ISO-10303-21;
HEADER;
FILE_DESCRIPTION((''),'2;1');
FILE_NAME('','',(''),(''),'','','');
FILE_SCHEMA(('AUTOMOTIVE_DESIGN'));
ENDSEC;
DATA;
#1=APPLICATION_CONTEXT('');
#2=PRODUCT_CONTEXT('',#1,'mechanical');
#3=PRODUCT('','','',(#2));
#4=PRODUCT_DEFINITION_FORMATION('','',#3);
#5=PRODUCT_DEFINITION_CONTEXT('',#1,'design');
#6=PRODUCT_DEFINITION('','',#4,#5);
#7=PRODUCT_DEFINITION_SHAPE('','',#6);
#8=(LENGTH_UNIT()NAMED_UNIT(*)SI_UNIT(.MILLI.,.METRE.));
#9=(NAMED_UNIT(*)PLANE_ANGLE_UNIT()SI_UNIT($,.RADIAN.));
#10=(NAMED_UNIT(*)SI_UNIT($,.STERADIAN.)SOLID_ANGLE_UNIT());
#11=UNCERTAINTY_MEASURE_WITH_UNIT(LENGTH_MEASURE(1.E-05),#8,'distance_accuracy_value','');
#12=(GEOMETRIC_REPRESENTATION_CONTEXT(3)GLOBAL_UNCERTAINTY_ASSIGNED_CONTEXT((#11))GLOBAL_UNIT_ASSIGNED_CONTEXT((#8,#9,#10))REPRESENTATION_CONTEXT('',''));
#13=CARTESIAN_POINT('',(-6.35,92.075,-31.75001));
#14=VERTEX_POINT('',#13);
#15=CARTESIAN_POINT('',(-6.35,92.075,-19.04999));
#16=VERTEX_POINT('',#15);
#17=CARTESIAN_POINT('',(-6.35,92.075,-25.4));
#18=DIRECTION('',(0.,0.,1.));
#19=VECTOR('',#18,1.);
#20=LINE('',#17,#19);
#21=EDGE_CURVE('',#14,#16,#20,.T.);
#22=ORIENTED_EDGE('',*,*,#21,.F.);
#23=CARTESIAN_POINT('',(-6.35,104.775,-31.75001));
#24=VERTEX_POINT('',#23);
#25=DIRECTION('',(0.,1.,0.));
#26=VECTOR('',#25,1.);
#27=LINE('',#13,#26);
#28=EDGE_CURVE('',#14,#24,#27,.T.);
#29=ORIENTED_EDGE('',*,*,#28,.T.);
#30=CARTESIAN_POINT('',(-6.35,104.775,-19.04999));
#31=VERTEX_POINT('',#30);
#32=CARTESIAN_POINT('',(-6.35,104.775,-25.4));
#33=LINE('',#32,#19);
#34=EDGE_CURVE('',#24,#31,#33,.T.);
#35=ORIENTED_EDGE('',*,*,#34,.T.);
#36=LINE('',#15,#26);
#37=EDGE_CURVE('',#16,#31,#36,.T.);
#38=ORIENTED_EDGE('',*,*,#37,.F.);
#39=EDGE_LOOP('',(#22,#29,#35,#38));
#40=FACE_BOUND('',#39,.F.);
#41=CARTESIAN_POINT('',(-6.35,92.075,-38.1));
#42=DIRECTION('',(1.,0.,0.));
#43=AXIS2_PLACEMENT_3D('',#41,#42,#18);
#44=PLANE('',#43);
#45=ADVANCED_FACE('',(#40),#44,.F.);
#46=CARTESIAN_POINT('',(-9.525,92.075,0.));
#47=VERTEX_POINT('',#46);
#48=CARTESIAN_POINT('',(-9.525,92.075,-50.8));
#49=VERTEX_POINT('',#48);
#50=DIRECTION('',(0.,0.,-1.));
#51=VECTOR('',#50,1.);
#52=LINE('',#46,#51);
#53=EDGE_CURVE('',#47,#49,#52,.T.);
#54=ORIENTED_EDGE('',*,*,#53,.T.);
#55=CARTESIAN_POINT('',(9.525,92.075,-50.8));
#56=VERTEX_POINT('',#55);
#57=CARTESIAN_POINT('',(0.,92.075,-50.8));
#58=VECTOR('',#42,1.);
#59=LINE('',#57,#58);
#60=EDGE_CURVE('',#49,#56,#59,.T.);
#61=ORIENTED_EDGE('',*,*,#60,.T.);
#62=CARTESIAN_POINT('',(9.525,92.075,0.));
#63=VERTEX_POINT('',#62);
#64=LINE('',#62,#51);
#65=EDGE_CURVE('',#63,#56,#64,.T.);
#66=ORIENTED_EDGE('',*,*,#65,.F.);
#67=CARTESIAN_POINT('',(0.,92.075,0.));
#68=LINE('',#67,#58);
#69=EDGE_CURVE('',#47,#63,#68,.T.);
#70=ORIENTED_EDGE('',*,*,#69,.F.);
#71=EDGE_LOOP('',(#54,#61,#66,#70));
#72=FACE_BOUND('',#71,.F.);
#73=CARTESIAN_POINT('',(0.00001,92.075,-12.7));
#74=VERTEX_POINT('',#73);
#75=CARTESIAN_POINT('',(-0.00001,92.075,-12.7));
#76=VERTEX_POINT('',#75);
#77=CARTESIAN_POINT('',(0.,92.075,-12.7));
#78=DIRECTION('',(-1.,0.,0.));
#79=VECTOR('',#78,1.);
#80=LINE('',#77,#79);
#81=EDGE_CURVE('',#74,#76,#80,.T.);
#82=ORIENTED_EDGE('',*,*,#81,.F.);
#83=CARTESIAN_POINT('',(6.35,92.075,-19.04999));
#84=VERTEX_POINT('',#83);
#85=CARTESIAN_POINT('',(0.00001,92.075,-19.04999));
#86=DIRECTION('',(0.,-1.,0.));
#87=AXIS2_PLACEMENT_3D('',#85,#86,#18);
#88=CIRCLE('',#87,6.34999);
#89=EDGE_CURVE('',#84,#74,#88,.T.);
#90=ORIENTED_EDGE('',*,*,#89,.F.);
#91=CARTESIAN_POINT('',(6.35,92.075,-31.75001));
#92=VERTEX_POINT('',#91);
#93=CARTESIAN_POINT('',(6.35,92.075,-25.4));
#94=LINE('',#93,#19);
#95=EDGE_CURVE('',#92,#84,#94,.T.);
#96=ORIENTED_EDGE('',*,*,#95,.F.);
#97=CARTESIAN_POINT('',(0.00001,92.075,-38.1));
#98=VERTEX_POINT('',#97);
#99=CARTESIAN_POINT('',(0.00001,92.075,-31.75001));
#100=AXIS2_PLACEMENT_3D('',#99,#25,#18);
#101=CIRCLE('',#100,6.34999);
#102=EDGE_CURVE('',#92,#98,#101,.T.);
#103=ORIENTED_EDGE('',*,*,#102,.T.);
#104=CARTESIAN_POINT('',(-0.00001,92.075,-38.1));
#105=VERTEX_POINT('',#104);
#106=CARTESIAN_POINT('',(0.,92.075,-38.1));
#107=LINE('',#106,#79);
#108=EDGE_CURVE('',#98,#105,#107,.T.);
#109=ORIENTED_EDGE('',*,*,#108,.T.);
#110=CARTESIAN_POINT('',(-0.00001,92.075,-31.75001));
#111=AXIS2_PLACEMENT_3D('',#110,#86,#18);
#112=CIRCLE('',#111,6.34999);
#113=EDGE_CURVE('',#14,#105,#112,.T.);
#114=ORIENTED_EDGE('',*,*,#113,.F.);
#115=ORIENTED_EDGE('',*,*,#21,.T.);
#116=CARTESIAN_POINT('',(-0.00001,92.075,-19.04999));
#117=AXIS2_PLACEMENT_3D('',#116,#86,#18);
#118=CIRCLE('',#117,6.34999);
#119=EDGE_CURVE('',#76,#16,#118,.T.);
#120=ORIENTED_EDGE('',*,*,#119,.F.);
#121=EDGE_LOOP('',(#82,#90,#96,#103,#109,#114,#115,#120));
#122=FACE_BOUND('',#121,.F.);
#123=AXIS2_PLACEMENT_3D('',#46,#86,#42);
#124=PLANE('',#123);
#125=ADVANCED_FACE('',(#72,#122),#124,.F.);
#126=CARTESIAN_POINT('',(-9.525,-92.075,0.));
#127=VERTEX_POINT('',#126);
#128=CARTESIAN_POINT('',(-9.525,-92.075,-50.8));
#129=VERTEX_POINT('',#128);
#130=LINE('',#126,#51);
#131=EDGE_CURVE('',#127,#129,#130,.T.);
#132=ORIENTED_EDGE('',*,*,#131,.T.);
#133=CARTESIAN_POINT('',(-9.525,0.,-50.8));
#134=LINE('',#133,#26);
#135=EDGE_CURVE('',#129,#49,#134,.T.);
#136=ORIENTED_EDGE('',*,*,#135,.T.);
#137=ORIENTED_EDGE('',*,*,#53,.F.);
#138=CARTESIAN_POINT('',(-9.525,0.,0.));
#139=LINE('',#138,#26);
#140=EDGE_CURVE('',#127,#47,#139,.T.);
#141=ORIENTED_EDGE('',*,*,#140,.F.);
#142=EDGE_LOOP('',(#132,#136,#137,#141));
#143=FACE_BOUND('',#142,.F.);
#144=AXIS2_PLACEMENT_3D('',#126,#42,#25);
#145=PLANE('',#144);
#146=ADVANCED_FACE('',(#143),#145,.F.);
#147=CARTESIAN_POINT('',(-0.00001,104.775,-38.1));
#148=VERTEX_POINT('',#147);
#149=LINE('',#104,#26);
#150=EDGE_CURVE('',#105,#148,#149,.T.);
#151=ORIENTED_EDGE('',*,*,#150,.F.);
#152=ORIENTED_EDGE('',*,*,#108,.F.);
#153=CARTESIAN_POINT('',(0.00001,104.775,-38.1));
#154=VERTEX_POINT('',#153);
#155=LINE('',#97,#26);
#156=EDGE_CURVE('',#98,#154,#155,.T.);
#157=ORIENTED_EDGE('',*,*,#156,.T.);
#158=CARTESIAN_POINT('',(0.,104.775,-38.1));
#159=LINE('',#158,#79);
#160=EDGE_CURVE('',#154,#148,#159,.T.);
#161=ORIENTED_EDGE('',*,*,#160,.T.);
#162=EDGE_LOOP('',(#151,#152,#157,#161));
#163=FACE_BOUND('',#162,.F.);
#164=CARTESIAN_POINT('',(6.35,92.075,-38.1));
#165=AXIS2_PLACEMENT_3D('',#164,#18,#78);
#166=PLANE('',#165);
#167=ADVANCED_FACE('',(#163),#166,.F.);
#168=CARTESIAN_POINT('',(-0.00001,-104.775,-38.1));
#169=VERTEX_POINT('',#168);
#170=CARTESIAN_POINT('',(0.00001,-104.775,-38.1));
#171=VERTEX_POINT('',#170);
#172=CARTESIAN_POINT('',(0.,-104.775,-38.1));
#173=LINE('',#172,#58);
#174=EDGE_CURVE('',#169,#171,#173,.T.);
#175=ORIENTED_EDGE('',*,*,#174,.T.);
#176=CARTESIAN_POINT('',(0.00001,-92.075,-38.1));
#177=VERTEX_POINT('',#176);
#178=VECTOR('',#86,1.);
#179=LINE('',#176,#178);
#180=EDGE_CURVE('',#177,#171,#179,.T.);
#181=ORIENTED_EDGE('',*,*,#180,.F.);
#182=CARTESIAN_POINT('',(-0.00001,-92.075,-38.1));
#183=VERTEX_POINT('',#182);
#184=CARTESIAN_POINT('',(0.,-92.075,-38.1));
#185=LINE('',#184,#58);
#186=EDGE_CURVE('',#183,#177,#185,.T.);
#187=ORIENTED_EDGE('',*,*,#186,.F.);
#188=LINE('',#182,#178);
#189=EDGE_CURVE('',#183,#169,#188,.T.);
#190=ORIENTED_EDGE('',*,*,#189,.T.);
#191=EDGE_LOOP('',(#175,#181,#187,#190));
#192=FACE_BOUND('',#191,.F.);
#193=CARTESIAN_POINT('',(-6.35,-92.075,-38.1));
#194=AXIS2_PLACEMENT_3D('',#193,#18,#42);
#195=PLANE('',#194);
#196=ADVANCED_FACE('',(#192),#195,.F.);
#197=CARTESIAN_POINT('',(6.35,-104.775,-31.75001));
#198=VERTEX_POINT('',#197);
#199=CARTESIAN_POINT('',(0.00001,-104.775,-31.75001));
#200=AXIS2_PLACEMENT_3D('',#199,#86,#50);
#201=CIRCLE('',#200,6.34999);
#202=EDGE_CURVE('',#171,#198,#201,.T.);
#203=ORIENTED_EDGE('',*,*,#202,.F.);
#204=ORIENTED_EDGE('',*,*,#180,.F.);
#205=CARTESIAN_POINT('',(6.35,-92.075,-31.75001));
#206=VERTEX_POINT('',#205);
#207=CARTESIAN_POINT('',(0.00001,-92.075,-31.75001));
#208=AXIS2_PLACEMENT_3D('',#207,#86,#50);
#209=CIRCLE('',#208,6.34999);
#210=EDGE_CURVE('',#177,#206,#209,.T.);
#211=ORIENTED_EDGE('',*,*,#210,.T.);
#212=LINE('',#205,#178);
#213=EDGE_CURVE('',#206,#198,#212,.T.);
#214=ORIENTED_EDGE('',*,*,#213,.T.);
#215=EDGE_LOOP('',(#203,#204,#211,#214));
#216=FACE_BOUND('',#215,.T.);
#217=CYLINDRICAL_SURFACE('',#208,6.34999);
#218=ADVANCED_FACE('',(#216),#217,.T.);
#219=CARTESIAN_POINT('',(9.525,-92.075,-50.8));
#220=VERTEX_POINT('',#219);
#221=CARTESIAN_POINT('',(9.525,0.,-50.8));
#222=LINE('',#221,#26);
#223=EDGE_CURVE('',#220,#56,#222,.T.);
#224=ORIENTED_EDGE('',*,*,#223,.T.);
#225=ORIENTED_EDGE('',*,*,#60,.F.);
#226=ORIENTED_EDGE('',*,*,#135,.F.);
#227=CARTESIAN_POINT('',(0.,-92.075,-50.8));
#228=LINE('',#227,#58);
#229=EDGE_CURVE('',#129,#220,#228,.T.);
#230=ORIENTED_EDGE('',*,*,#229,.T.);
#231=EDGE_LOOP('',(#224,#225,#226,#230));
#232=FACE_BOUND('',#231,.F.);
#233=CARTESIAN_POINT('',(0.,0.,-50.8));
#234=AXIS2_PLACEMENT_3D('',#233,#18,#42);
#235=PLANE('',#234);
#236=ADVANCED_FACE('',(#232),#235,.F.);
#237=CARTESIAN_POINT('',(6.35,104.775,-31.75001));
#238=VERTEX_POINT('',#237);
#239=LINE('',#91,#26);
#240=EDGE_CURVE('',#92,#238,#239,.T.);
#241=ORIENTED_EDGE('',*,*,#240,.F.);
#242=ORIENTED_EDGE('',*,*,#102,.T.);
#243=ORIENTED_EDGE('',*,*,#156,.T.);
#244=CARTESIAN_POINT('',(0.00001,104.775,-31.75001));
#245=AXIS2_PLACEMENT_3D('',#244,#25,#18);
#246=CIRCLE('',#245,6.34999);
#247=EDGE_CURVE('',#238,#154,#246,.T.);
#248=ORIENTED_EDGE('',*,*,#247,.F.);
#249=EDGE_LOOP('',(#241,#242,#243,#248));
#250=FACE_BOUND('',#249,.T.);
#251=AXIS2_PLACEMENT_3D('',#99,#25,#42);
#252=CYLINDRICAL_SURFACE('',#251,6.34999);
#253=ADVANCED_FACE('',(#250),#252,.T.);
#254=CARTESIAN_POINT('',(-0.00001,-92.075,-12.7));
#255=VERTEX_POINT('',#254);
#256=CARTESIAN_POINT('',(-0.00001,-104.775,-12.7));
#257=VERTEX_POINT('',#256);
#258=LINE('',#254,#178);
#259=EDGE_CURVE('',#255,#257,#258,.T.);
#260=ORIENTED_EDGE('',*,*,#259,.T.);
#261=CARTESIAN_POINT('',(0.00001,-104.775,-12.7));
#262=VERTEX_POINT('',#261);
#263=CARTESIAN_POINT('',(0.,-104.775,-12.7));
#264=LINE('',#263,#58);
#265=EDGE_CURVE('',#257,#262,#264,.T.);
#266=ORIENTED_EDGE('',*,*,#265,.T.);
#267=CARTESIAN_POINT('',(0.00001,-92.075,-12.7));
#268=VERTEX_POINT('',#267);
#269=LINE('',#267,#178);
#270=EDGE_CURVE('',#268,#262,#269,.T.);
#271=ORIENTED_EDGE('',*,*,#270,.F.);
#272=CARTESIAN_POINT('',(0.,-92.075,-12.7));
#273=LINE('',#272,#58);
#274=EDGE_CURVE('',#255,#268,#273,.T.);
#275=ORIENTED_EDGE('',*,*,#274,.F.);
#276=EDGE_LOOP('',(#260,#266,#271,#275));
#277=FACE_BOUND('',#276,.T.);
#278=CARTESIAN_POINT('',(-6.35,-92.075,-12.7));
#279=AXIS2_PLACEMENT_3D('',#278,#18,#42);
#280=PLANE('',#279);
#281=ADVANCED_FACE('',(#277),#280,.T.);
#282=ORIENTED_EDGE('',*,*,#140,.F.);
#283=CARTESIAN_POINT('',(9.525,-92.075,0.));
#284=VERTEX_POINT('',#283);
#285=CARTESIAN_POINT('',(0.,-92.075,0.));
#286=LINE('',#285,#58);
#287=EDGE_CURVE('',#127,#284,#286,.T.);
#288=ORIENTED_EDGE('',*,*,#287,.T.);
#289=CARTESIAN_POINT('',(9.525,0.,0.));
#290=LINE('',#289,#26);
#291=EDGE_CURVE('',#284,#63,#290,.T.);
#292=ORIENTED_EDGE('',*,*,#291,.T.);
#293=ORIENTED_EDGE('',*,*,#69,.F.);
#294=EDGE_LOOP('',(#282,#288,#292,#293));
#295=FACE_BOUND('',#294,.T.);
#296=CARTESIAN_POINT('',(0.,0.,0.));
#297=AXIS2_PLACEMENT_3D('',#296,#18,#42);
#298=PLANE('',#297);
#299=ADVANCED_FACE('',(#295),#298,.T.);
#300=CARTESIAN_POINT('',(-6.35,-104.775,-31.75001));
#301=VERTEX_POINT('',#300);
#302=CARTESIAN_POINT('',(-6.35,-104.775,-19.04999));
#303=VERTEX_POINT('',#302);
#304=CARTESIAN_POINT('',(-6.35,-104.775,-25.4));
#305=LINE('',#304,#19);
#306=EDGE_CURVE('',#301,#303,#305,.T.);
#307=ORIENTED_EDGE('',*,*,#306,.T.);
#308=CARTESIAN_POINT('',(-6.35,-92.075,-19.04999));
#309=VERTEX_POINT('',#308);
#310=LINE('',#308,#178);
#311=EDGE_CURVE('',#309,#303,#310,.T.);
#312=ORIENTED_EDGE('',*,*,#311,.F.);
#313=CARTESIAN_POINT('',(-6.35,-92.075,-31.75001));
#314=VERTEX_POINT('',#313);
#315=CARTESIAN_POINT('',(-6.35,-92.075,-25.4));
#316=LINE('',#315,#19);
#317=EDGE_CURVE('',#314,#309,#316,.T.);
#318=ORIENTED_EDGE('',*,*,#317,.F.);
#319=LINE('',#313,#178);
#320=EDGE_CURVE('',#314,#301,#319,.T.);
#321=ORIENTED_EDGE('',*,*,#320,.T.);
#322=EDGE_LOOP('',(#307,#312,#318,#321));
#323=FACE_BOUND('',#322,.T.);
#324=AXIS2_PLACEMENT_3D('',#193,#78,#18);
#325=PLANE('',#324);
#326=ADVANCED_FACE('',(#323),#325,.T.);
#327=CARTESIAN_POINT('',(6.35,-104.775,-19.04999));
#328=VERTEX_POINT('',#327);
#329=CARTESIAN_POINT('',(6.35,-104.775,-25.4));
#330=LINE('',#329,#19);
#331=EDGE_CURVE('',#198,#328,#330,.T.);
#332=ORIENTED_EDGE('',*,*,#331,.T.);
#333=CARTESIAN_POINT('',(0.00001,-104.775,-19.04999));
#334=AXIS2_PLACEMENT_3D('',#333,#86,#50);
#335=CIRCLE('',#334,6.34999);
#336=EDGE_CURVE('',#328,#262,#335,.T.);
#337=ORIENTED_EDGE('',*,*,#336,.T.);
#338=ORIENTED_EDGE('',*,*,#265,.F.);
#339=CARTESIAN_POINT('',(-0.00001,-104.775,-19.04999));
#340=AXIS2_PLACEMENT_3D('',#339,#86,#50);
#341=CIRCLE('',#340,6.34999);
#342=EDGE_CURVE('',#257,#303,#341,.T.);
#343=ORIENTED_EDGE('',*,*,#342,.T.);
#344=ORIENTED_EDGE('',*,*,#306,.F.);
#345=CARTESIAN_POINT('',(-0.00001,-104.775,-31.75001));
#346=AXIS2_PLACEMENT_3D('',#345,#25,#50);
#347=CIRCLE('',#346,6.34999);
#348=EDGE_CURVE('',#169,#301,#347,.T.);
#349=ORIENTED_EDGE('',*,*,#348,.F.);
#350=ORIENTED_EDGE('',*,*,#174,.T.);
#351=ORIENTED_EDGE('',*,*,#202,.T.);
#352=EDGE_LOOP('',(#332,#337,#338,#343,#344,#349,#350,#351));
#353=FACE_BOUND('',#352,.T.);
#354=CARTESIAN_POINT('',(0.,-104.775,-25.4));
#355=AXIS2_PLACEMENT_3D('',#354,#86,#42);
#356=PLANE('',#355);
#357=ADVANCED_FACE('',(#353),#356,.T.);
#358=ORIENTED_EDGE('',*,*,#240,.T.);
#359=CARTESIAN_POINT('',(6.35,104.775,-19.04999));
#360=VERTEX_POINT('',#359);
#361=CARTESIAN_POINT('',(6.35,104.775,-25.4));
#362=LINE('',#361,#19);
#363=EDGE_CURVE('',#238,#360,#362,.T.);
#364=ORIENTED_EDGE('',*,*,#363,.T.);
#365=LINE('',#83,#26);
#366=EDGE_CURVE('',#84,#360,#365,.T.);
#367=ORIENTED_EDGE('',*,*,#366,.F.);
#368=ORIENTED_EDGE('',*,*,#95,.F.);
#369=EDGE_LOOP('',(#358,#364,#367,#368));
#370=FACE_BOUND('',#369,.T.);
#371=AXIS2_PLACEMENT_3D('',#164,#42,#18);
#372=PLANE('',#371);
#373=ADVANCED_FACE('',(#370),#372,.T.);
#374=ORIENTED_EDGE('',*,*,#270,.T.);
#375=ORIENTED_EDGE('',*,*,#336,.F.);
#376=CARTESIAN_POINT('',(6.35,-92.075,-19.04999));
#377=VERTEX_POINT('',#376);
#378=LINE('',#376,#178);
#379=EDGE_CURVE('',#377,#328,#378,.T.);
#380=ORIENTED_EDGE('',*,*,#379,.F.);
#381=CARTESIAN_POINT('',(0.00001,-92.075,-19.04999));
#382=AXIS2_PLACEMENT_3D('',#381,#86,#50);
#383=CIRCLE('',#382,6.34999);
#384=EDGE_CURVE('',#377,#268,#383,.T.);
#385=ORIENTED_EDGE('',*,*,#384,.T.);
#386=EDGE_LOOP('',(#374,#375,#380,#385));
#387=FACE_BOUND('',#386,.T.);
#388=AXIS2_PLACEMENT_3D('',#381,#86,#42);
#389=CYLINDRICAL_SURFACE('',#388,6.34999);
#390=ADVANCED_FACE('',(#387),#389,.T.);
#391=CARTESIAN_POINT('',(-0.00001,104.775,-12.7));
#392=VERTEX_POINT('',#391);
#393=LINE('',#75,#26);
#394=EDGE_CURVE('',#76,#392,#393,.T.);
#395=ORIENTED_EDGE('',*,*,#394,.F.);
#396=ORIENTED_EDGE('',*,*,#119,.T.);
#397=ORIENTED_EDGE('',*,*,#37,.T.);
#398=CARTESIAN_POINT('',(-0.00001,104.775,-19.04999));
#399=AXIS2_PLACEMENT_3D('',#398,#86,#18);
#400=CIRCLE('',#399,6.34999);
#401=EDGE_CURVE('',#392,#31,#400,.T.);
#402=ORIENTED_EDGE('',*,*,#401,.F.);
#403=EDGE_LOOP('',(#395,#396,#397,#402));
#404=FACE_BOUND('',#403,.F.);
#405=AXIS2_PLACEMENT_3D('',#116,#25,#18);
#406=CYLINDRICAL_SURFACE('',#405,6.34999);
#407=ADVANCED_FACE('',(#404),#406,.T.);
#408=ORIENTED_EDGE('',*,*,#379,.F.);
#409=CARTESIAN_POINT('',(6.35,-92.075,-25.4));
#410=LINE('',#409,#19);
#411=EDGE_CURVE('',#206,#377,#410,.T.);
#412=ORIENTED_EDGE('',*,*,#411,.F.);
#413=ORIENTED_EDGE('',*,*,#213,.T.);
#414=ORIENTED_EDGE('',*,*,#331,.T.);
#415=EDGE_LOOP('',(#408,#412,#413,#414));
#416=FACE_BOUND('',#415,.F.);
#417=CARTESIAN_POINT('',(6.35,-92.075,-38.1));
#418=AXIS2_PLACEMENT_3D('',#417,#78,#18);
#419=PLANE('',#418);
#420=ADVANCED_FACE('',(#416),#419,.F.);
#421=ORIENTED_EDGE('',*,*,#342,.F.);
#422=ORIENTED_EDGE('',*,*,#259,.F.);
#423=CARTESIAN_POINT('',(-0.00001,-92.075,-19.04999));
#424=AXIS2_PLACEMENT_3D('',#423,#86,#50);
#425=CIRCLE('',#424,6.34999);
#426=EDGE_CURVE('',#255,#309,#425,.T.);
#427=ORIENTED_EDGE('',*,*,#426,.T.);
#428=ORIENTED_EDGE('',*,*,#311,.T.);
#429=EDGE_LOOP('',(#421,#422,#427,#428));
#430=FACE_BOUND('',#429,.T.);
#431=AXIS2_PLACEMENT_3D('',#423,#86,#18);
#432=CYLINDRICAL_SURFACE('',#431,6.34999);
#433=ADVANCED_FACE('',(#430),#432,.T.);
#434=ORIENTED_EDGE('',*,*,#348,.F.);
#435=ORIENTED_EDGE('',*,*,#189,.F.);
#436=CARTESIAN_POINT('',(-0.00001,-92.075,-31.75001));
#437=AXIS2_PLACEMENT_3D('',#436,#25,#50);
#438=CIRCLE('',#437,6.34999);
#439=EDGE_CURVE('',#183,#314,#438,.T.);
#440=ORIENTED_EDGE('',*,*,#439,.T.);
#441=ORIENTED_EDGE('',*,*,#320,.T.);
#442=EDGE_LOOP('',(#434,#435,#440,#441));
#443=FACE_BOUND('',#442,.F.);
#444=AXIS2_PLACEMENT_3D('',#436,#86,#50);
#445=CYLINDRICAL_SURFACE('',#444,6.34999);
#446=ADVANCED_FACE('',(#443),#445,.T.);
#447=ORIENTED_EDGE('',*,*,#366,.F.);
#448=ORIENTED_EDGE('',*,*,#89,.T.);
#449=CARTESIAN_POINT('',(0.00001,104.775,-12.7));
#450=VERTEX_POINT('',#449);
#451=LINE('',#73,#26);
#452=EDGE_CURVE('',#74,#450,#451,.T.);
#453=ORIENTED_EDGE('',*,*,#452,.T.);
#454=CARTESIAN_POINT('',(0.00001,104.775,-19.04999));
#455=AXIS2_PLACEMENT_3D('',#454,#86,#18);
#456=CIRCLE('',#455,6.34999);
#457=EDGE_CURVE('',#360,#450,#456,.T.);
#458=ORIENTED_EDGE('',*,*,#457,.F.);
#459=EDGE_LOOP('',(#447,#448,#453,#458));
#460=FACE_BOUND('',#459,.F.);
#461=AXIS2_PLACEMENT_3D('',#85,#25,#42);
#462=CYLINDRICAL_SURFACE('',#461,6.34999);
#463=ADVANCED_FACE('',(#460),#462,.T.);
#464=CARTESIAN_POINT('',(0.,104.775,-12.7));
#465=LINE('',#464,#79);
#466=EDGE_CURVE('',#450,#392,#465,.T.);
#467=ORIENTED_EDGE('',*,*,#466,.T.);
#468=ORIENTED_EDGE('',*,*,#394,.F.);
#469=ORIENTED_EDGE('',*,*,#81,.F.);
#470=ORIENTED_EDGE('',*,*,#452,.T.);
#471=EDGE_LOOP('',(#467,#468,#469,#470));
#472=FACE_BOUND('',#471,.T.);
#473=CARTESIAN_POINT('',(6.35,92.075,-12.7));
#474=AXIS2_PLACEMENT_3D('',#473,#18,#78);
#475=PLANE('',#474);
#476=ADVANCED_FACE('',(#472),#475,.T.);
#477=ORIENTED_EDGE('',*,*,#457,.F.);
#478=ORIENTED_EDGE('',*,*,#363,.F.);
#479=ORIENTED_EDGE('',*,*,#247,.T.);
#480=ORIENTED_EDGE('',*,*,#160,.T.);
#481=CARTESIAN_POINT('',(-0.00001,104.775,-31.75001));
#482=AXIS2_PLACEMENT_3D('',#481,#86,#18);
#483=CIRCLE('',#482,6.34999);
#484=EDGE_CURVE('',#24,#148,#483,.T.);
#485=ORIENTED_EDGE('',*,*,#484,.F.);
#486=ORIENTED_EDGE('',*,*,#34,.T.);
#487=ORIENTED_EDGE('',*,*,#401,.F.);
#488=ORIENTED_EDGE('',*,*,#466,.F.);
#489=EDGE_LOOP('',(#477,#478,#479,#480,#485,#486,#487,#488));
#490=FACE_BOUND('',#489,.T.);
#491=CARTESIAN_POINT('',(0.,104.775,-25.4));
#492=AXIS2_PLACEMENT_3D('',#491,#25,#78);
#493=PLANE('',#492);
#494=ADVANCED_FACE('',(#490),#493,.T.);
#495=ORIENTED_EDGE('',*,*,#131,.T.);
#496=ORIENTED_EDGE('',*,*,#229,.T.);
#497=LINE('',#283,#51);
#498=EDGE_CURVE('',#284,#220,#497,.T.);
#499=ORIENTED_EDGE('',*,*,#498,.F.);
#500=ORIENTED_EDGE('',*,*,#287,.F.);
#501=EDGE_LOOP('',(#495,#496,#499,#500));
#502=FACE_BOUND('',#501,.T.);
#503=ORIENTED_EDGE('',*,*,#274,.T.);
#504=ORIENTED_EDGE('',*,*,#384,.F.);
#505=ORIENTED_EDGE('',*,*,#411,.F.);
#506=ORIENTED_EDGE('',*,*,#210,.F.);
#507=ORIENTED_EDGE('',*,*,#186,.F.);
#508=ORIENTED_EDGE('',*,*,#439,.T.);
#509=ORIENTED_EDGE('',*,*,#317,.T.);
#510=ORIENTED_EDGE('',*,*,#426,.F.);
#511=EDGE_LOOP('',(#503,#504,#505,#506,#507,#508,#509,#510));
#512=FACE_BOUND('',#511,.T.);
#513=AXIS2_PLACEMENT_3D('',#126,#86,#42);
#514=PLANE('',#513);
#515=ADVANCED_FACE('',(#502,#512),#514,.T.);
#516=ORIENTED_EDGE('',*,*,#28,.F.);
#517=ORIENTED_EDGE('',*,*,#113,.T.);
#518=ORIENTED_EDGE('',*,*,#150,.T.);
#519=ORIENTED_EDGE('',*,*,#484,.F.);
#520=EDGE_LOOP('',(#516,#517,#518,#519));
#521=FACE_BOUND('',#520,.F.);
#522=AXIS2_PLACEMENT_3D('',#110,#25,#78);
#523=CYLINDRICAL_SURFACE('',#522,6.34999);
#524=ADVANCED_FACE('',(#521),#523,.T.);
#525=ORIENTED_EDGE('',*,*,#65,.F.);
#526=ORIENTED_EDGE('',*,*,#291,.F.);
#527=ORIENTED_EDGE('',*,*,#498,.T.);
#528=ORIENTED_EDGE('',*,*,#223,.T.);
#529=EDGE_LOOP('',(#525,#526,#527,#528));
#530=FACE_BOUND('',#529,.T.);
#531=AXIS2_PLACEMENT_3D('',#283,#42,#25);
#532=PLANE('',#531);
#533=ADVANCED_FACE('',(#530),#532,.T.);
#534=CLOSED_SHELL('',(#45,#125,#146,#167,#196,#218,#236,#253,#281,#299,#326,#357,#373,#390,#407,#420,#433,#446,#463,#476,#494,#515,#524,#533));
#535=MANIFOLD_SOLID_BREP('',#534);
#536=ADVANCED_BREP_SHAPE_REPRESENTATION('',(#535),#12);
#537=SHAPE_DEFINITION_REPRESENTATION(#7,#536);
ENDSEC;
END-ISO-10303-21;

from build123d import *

# Parameters (mm, degrees)
F0_W     = 19.05
F0_H     = 184.15
F1_DEPTH = 50.8
F2_W     = 12.7
F2_H     = 25.4
F3_DEPTH = 12.7
F4_W     = 12.7
F4_H     = 25.4
F5_DEPTH = 12.7
F6_R     = 6.34999


# Not quite as in the source:
# - a fillet or chamfer is up to 0.001 mm smaller than in the source, because OpenCascade refuses the exact size


with BuildPart() as f1:
    # F0 (on Top) → F1 (new body)
    with BuildSketch(Plane.XY):
        Rectangle(F0_W, F0_H)
    extrude(amount=-F1_DEPTH)

    # F2 (on face) → F3 (join)
    with BuildSketch(Plane.XZ.offset(92.075)):
        with Locations((0, -25.4)):
            Rectangle(F2_W, F2_H)
    extrude(amount=F3_DEPTH)

    # F4 (on face) → F5 (join)
    with BuildSketch(Plane(origin=(0, 92.075, 0), x_dir=(-1, 0, 0), z_dir=(0, 1, 0))):
        with Locations((0, -25.4)):
            Rectangle(F4_W, F4_H)
    extrude(amount=F5_DEPTH)

    # F6 (radius 6.35 in the source; OpenCascade refuses exactly that, so slightly less here)
    f6_edges = [f1.edges().sort_by_distance(p)[0] for p in [
        (6.35, 98.425, -12.7),
        (-6.35, 98.425, -12.7),
        (-6.35, 98.425, -38.1),
        (6.35, 98.425, -38.1),
        (-6.35, -98.425, -12.7),
        (6.35, -98.425, -12.7),
        (-6.35, -98.425, -38.1),
        (6.35, -98.425, -38.1),
    ]]
    fillet(f6_edges, radius=F6_R)


solid = f1.part
